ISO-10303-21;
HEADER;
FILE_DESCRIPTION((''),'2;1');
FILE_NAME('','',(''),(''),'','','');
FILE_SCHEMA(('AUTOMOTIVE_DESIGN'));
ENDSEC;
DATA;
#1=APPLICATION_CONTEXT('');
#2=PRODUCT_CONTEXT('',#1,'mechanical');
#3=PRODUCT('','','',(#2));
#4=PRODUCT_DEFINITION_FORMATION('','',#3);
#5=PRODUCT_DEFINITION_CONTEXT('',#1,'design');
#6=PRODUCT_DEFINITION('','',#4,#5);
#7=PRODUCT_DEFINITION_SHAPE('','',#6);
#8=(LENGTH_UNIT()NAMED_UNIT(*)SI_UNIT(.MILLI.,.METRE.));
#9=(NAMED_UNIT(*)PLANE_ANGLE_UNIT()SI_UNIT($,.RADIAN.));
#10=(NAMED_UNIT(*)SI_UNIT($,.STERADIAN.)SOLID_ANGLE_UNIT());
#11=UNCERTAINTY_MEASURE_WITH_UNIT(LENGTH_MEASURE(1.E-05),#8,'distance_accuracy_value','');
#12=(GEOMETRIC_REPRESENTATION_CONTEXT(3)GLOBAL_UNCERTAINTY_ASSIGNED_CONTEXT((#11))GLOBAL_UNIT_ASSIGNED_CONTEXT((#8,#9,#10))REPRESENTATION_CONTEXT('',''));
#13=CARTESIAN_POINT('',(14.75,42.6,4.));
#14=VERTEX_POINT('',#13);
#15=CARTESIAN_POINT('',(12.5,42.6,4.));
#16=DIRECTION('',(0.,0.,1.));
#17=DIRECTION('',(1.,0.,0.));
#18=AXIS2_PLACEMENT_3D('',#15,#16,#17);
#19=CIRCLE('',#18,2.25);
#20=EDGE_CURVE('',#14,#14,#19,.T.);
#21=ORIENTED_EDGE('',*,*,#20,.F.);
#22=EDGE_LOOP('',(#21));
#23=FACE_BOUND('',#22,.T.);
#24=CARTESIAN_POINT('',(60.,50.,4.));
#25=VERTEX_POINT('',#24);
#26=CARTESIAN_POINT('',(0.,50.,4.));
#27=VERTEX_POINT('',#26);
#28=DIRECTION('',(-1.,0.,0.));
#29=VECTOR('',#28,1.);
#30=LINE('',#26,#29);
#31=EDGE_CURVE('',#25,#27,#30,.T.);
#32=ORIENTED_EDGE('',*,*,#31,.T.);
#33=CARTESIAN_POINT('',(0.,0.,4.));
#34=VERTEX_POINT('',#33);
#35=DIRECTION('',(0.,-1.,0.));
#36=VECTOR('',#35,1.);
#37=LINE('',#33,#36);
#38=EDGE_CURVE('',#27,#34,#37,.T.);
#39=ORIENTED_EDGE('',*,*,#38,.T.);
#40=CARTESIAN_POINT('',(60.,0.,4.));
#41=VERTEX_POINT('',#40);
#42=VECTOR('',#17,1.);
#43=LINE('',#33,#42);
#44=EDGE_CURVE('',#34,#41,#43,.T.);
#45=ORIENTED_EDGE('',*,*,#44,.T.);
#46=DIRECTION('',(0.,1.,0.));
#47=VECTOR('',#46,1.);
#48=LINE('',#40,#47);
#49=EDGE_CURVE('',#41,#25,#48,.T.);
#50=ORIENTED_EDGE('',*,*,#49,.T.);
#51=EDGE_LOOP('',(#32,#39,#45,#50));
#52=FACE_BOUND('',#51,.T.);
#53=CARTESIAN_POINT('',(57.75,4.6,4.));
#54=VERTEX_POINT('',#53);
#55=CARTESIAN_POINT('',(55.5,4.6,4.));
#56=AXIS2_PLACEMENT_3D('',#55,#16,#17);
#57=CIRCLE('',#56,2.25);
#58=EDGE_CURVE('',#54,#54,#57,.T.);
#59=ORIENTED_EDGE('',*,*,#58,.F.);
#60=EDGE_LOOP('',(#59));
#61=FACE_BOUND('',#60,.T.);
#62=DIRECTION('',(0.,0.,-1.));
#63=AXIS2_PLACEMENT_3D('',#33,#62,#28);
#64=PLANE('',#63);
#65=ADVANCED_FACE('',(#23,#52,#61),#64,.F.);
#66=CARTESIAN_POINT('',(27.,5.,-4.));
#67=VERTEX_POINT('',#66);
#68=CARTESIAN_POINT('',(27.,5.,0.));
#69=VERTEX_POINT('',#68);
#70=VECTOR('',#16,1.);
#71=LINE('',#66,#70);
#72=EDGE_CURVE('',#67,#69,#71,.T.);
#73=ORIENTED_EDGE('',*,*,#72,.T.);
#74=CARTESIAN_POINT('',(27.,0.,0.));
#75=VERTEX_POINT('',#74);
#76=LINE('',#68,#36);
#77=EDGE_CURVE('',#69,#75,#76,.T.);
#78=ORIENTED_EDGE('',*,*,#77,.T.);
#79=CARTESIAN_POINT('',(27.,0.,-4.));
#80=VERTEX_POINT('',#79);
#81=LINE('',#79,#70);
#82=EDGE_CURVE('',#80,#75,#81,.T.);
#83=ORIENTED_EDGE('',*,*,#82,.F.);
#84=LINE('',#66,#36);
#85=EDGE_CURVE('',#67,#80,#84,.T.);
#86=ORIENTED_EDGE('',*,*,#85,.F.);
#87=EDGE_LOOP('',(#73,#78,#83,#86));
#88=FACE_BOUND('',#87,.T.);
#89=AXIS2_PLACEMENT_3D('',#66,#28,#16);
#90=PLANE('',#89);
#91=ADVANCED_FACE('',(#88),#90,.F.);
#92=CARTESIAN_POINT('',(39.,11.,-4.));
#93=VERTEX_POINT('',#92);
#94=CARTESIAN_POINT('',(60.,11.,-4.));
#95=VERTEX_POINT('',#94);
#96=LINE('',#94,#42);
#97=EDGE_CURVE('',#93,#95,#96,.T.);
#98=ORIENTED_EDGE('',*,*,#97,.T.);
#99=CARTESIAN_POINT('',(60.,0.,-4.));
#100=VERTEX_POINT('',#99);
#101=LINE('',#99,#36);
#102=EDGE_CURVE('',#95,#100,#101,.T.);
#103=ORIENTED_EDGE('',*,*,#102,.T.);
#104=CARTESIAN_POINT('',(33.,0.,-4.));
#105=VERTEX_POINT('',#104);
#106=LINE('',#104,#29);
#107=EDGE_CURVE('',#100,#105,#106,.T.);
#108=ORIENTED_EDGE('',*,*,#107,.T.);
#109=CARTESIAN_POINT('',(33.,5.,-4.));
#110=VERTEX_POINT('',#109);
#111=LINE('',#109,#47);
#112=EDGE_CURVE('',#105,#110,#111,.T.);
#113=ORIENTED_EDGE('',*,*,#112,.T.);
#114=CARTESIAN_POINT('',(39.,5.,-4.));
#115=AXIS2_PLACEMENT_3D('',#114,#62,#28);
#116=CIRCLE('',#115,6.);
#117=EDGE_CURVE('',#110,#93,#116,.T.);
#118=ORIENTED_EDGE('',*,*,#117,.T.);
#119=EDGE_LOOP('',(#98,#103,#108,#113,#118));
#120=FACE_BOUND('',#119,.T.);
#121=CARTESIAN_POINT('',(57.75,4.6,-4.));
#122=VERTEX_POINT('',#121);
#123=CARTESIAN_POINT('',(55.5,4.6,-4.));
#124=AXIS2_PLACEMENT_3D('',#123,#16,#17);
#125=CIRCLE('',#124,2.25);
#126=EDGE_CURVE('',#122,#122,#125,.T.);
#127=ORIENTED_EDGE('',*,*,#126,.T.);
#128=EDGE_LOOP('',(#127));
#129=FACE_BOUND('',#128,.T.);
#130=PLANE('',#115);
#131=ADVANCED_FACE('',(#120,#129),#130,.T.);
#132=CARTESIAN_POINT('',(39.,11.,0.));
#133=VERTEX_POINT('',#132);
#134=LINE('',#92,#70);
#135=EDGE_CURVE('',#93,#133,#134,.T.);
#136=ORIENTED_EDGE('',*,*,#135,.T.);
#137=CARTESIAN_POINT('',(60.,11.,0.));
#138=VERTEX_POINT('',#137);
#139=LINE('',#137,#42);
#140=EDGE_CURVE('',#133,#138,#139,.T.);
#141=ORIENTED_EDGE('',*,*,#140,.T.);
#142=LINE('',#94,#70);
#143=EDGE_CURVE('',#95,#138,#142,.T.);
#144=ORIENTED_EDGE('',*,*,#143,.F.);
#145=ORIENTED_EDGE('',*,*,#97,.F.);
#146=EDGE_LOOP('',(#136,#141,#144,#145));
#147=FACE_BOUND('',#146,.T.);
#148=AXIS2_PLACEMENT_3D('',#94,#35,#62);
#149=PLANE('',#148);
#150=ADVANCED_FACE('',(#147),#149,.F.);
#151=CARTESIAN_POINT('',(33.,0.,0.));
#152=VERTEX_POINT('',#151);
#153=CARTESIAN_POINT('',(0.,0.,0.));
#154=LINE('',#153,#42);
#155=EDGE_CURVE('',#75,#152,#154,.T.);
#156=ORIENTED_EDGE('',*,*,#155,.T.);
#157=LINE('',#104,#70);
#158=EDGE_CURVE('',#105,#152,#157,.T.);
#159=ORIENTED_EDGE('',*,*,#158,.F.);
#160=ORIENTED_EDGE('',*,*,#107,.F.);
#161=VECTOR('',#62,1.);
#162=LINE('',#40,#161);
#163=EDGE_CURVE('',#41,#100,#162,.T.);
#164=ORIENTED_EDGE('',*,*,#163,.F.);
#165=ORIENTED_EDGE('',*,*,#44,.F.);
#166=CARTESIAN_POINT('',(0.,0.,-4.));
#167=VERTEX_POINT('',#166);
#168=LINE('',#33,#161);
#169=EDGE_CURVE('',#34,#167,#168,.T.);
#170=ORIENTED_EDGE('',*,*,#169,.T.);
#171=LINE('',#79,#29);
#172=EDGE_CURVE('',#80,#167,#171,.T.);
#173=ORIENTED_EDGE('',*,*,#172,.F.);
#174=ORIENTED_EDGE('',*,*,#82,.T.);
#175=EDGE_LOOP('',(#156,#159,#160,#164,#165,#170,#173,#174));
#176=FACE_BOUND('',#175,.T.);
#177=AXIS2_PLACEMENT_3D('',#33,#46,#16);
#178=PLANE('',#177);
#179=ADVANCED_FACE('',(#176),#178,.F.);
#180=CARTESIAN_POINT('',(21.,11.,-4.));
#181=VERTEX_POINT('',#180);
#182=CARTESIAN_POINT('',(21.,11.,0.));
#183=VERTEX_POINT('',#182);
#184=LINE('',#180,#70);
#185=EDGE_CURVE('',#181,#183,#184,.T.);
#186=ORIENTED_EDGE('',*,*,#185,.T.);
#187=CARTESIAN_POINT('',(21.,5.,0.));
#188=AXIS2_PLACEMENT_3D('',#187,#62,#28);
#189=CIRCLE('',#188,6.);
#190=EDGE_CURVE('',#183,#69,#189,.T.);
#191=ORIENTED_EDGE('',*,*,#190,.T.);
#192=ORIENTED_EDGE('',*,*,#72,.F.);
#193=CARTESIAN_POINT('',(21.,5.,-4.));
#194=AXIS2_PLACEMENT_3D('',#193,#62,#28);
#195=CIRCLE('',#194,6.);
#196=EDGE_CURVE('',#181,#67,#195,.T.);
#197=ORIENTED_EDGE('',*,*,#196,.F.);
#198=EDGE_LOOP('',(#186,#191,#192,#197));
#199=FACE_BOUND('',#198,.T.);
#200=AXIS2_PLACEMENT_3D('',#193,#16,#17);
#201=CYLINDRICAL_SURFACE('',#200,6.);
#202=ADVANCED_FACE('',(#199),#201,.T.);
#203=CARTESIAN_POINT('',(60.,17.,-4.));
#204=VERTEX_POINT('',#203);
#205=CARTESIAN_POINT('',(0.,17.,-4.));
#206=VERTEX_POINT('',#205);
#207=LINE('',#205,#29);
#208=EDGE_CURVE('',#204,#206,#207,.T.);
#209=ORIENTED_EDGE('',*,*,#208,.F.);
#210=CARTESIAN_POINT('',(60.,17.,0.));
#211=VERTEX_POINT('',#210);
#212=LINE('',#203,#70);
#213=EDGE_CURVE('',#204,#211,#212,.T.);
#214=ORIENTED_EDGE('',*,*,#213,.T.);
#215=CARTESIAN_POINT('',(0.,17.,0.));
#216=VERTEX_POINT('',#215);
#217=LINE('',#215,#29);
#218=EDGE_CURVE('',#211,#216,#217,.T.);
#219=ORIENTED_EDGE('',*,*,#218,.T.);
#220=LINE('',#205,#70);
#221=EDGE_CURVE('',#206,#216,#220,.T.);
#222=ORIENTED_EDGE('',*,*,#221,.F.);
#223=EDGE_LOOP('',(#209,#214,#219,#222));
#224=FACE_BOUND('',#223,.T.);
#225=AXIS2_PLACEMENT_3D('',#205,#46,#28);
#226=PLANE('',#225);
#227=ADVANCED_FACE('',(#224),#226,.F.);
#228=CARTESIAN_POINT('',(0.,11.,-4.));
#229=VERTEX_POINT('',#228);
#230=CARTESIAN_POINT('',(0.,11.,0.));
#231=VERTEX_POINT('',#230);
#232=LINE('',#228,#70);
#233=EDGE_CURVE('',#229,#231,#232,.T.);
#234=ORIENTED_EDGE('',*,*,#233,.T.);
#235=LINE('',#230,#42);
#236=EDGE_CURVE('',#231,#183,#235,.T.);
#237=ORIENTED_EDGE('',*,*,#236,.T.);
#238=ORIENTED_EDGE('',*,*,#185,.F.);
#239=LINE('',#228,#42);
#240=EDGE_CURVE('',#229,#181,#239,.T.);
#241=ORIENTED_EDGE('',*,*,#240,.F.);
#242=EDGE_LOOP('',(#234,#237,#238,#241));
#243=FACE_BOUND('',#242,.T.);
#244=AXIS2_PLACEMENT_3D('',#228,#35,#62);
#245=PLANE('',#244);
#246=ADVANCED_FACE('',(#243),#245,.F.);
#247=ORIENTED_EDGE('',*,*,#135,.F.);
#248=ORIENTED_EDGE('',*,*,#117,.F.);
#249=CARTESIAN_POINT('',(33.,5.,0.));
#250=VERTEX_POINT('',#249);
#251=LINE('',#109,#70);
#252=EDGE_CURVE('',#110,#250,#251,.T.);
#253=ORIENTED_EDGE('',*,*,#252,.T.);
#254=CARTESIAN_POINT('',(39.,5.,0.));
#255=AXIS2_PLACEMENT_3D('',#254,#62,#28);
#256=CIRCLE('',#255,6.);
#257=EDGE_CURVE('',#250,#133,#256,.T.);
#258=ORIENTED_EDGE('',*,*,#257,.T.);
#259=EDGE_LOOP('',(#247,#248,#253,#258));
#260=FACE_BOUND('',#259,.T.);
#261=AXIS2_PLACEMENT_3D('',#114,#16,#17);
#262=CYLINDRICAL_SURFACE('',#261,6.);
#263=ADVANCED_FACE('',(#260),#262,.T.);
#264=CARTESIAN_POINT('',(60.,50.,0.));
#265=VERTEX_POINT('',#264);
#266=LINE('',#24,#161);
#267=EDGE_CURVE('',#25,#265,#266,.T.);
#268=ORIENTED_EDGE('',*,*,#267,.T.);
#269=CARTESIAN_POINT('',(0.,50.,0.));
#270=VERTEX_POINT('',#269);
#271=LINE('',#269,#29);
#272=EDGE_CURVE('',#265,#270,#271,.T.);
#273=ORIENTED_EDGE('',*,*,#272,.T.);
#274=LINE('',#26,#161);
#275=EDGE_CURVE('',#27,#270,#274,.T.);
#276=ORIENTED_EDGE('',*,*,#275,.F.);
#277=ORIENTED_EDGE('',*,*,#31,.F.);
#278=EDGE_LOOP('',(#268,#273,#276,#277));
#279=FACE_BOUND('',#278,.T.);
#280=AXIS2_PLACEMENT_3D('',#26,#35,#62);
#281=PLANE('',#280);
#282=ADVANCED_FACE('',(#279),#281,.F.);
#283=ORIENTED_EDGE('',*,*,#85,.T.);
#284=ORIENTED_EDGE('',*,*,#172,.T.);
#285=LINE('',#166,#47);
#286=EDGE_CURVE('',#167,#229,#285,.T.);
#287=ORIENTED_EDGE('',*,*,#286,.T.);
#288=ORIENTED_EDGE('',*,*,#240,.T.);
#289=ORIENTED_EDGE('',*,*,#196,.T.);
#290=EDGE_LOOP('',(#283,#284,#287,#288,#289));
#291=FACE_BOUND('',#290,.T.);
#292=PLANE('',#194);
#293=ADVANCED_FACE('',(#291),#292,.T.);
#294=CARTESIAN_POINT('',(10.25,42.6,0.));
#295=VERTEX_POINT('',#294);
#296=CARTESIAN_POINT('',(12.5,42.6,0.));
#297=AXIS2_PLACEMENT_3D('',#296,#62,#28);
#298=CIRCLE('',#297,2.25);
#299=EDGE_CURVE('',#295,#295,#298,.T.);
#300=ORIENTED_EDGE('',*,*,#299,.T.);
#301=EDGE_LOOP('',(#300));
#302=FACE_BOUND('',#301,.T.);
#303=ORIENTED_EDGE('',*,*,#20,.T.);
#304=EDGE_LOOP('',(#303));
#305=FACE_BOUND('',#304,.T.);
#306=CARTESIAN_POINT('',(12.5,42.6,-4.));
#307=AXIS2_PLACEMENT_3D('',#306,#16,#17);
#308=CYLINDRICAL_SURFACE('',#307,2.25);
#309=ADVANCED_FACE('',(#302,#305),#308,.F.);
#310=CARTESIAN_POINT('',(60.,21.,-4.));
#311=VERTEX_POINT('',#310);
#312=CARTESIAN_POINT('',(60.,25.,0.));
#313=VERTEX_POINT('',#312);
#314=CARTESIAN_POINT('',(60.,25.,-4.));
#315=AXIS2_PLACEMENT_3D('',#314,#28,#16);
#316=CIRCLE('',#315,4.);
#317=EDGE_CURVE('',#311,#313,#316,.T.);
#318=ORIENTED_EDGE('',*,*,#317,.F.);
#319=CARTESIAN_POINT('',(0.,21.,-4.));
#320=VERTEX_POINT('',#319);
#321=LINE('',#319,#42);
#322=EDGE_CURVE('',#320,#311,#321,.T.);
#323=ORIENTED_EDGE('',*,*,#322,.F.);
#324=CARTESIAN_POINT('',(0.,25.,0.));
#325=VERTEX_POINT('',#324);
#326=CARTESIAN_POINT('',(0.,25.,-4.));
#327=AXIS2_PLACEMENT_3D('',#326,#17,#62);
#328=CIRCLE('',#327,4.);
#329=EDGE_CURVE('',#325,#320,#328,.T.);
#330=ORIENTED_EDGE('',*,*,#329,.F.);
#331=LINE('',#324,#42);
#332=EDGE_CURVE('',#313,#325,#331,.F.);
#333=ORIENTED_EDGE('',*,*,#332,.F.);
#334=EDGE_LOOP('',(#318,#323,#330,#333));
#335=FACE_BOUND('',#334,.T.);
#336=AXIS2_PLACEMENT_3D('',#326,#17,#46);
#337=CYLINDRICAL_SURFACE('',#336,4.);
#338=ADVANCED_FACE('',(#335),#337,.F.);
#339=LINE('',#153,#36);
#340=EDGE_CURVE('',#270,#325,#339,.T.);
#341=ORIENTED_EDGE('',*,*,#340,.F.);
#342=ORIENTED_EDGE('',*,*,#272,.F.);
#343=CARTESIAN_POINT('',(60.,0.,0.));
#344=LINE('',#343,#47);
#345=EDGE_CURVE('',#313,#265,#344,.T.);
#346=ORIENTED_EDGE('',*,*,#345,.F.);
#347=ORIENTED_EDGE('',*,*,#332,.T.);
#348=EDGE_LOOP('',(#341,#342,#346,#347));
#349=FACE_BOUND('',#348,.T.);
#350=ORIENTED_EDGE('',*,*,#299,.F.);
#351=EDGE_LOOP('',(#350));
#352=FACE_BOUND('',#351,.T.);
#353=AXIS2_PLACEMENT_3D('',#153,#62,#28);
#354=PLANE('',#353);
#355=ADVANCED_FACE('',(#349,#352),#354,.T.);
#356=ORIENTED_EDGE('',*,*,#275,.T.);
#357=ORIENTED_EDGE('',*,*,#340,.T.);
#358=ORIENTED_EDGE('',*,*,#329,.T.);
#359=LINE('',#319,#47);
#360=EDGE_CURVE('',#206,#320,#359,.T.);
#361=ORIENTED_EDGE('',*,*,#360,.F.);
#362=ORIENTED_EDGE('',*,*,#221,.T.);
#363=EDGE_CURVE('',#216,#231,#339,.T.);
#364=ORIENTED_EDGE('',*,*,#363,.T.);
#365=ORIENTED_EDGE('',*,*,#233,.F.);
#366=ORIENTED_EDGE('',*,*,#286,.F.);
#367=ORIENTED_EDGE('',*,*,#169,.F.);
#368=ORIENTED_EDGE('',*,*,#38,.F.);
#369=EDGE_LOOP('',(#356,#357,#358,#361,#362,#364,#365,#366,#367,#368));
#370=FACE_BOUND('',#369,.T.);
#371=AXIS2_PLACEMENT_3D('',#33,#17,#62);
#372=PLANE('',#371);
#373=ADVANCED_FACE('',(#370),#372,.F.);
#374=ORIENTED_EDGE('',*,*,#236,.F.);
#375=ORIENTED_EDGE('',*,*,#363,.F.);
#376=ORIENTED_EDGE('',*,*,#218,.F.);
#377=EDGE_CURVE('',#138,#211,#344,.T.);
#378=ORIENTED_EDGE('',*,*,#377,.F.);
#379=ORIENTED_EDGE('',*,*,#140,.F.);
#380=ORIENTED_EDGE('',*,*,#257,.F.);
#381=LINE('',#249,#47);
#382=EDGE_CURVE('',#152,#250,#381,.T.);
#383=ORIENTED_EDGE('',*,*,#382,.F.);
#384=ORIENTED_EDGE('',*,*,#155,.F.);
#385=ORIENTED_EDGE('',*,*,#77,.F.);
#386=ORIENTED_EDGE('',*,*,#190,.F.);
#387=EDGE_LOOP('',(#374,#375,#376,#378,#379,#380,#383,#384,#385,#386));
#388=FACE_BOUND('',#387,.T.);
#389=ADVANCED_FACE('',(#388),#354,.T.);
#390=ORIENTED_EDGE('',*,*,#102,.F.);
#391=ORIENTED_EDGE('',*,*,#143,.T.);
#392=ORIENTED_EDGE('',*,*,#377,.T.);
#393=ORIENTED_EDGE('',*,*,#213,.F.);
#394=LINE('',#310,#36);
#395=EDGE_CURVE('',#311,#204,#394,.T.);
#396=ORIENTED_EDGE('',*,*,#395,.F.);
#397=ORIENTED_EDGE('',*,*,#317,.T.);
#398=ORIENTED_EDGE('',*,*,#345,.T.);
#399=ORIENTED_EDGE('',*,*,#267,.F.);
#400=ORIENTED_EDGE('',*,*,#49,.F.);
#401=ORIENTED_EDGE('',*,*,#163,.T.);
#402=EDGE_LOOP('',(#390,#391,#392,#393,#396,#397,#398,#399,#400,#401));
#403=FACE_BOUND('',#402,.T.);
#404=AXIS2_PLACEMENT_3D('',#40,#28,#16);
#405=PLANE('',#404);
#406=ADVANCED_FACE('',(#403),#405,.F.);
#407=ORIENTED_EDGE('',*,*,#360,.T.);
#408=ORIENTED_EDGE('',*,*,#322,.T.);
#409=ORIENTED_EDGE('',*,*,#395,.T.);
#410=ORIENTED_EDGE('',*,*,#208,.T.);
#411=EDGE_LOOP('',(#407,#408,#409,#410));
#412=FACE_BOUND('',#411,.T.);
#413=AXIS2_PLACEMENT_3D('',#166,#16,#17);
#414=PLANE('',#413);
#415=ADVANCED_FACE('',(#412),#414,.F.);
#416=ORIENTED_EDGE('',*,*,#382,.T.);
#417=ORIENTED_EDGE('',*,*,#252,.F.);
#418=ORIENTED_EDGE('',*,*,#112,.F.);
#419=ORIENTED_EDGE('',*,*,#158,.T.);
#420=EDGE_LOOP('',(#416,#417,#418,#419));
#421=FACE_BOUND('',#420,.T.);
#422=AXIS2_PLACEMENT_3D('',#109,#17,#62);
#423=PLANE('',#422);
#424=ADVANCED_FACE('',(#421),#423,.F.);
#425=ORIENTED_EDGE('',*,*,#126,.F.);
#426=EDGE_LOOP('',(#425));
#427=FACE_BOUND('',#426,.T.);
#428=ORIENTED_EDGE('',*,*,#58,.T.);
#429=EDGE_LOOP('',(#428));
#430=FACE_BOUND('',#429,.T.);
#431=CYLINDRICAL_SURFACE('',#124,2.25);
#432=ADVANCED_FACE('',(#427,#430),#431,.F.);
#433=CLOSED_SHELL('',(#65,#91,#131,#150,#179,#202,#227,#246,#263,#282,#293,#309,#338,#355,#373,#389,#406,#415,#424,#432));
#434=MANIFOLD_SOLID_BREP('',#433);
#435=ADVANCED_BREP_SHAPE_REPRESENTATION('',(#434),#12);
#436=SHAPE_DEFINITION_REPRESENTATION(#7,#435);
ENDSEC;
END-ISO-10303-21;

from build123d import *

# Parameters (mm, degrees)
SKETCH1_W           = 60
SKETCH1_H           = 50
BOSS_EXTRUDE1_DEPTH = 4
SKETCH2_W           = 60
SKETCH2_H           = 4
BOSS_EXTRUDE2_DEPTH = 4
FILLET1_R           = 4
BOSS_EXTRUDE3_DEPTH = 4
SKETCH3_R           = 2.25
CUT_EXTRUDE1_DEPTH  = 79.511145706


with BuildPart() as part:
    # Sketch1 → Boss-Extrude1 (new body)
    with BuildSketch(Plane.XY):
        with Locations((30, 25)):
            Rectangle(SKETCH1_W, SKETCH1_H)
    extrude(amount=BOSS_EXTRUDE1_DEPTH)

    # Sketch2 → Boss-Extrude2 (add)
    with BuildSketch(Plane(origin=(0, 0, 0), x_dir=(-1, 0, 0), z_dir=(0, 0, -1))):
        with Locations((-30, 19)):
            Rectangle(SKETCH2_W, SKETCH2_H)
    extrude(amount=BOSS_EXTRUDE2_DEPTH)

    # Fillet1
    fillet1_edges = [part.edges().sort_by_distance(p)[0] for p in [
        (30, 21, 0),
    ]]
    fillet(fillet1_edges, radius=FILLET1_R - 0.0001)  # a hair under: the kernel refuses the full size

    # Sketch6 → Boss-Extrude3 (add)
    with BuildSketch(Plane(origin=(0, 0, 0), x_dir=(-1, 0, 0), z_dir=(0, 0, -1))):
        with BuildLine():
            Line((0, 0), (0, 11))
            Line((0, 11), (-21, 11))
            ThreePointArc((-21, 11), (-25.242640687, 9.242640687), (-27, 5))
            Line((-27, 5), (-27, 0))
            Line((-27, 0), (0, 0))
        make_face()
        with BuildLine():
            Line((-33, 5), (-33, 0))
            Line((-33, 0), (-60, 0))
            Line((-60, 0), (-60, 11))
            Line((-60, 11), (-39, 11))
            ThreePointArc((-39, 11), (-34.757359313, 9.242640687), (-33, 5))
        make_face()
    extrude(amount=BOSS_EXTRUDE3_DEPTH)

    # Sketch3 → Cut-Extrude1 (cut, through all)
    with BuildSketch(Plane.XY.offset(4)):
        with Locations((12.5, 42.6)):
            Circle(SKETCH3_R)
        with Locations((55.5, 4.6)):
            Circle(SKETCH3_R)
    extrude(amount=-CUT_EXTRUDE1_DEPTH, mode=Mode.SUBTRACT)


solid = part.part
